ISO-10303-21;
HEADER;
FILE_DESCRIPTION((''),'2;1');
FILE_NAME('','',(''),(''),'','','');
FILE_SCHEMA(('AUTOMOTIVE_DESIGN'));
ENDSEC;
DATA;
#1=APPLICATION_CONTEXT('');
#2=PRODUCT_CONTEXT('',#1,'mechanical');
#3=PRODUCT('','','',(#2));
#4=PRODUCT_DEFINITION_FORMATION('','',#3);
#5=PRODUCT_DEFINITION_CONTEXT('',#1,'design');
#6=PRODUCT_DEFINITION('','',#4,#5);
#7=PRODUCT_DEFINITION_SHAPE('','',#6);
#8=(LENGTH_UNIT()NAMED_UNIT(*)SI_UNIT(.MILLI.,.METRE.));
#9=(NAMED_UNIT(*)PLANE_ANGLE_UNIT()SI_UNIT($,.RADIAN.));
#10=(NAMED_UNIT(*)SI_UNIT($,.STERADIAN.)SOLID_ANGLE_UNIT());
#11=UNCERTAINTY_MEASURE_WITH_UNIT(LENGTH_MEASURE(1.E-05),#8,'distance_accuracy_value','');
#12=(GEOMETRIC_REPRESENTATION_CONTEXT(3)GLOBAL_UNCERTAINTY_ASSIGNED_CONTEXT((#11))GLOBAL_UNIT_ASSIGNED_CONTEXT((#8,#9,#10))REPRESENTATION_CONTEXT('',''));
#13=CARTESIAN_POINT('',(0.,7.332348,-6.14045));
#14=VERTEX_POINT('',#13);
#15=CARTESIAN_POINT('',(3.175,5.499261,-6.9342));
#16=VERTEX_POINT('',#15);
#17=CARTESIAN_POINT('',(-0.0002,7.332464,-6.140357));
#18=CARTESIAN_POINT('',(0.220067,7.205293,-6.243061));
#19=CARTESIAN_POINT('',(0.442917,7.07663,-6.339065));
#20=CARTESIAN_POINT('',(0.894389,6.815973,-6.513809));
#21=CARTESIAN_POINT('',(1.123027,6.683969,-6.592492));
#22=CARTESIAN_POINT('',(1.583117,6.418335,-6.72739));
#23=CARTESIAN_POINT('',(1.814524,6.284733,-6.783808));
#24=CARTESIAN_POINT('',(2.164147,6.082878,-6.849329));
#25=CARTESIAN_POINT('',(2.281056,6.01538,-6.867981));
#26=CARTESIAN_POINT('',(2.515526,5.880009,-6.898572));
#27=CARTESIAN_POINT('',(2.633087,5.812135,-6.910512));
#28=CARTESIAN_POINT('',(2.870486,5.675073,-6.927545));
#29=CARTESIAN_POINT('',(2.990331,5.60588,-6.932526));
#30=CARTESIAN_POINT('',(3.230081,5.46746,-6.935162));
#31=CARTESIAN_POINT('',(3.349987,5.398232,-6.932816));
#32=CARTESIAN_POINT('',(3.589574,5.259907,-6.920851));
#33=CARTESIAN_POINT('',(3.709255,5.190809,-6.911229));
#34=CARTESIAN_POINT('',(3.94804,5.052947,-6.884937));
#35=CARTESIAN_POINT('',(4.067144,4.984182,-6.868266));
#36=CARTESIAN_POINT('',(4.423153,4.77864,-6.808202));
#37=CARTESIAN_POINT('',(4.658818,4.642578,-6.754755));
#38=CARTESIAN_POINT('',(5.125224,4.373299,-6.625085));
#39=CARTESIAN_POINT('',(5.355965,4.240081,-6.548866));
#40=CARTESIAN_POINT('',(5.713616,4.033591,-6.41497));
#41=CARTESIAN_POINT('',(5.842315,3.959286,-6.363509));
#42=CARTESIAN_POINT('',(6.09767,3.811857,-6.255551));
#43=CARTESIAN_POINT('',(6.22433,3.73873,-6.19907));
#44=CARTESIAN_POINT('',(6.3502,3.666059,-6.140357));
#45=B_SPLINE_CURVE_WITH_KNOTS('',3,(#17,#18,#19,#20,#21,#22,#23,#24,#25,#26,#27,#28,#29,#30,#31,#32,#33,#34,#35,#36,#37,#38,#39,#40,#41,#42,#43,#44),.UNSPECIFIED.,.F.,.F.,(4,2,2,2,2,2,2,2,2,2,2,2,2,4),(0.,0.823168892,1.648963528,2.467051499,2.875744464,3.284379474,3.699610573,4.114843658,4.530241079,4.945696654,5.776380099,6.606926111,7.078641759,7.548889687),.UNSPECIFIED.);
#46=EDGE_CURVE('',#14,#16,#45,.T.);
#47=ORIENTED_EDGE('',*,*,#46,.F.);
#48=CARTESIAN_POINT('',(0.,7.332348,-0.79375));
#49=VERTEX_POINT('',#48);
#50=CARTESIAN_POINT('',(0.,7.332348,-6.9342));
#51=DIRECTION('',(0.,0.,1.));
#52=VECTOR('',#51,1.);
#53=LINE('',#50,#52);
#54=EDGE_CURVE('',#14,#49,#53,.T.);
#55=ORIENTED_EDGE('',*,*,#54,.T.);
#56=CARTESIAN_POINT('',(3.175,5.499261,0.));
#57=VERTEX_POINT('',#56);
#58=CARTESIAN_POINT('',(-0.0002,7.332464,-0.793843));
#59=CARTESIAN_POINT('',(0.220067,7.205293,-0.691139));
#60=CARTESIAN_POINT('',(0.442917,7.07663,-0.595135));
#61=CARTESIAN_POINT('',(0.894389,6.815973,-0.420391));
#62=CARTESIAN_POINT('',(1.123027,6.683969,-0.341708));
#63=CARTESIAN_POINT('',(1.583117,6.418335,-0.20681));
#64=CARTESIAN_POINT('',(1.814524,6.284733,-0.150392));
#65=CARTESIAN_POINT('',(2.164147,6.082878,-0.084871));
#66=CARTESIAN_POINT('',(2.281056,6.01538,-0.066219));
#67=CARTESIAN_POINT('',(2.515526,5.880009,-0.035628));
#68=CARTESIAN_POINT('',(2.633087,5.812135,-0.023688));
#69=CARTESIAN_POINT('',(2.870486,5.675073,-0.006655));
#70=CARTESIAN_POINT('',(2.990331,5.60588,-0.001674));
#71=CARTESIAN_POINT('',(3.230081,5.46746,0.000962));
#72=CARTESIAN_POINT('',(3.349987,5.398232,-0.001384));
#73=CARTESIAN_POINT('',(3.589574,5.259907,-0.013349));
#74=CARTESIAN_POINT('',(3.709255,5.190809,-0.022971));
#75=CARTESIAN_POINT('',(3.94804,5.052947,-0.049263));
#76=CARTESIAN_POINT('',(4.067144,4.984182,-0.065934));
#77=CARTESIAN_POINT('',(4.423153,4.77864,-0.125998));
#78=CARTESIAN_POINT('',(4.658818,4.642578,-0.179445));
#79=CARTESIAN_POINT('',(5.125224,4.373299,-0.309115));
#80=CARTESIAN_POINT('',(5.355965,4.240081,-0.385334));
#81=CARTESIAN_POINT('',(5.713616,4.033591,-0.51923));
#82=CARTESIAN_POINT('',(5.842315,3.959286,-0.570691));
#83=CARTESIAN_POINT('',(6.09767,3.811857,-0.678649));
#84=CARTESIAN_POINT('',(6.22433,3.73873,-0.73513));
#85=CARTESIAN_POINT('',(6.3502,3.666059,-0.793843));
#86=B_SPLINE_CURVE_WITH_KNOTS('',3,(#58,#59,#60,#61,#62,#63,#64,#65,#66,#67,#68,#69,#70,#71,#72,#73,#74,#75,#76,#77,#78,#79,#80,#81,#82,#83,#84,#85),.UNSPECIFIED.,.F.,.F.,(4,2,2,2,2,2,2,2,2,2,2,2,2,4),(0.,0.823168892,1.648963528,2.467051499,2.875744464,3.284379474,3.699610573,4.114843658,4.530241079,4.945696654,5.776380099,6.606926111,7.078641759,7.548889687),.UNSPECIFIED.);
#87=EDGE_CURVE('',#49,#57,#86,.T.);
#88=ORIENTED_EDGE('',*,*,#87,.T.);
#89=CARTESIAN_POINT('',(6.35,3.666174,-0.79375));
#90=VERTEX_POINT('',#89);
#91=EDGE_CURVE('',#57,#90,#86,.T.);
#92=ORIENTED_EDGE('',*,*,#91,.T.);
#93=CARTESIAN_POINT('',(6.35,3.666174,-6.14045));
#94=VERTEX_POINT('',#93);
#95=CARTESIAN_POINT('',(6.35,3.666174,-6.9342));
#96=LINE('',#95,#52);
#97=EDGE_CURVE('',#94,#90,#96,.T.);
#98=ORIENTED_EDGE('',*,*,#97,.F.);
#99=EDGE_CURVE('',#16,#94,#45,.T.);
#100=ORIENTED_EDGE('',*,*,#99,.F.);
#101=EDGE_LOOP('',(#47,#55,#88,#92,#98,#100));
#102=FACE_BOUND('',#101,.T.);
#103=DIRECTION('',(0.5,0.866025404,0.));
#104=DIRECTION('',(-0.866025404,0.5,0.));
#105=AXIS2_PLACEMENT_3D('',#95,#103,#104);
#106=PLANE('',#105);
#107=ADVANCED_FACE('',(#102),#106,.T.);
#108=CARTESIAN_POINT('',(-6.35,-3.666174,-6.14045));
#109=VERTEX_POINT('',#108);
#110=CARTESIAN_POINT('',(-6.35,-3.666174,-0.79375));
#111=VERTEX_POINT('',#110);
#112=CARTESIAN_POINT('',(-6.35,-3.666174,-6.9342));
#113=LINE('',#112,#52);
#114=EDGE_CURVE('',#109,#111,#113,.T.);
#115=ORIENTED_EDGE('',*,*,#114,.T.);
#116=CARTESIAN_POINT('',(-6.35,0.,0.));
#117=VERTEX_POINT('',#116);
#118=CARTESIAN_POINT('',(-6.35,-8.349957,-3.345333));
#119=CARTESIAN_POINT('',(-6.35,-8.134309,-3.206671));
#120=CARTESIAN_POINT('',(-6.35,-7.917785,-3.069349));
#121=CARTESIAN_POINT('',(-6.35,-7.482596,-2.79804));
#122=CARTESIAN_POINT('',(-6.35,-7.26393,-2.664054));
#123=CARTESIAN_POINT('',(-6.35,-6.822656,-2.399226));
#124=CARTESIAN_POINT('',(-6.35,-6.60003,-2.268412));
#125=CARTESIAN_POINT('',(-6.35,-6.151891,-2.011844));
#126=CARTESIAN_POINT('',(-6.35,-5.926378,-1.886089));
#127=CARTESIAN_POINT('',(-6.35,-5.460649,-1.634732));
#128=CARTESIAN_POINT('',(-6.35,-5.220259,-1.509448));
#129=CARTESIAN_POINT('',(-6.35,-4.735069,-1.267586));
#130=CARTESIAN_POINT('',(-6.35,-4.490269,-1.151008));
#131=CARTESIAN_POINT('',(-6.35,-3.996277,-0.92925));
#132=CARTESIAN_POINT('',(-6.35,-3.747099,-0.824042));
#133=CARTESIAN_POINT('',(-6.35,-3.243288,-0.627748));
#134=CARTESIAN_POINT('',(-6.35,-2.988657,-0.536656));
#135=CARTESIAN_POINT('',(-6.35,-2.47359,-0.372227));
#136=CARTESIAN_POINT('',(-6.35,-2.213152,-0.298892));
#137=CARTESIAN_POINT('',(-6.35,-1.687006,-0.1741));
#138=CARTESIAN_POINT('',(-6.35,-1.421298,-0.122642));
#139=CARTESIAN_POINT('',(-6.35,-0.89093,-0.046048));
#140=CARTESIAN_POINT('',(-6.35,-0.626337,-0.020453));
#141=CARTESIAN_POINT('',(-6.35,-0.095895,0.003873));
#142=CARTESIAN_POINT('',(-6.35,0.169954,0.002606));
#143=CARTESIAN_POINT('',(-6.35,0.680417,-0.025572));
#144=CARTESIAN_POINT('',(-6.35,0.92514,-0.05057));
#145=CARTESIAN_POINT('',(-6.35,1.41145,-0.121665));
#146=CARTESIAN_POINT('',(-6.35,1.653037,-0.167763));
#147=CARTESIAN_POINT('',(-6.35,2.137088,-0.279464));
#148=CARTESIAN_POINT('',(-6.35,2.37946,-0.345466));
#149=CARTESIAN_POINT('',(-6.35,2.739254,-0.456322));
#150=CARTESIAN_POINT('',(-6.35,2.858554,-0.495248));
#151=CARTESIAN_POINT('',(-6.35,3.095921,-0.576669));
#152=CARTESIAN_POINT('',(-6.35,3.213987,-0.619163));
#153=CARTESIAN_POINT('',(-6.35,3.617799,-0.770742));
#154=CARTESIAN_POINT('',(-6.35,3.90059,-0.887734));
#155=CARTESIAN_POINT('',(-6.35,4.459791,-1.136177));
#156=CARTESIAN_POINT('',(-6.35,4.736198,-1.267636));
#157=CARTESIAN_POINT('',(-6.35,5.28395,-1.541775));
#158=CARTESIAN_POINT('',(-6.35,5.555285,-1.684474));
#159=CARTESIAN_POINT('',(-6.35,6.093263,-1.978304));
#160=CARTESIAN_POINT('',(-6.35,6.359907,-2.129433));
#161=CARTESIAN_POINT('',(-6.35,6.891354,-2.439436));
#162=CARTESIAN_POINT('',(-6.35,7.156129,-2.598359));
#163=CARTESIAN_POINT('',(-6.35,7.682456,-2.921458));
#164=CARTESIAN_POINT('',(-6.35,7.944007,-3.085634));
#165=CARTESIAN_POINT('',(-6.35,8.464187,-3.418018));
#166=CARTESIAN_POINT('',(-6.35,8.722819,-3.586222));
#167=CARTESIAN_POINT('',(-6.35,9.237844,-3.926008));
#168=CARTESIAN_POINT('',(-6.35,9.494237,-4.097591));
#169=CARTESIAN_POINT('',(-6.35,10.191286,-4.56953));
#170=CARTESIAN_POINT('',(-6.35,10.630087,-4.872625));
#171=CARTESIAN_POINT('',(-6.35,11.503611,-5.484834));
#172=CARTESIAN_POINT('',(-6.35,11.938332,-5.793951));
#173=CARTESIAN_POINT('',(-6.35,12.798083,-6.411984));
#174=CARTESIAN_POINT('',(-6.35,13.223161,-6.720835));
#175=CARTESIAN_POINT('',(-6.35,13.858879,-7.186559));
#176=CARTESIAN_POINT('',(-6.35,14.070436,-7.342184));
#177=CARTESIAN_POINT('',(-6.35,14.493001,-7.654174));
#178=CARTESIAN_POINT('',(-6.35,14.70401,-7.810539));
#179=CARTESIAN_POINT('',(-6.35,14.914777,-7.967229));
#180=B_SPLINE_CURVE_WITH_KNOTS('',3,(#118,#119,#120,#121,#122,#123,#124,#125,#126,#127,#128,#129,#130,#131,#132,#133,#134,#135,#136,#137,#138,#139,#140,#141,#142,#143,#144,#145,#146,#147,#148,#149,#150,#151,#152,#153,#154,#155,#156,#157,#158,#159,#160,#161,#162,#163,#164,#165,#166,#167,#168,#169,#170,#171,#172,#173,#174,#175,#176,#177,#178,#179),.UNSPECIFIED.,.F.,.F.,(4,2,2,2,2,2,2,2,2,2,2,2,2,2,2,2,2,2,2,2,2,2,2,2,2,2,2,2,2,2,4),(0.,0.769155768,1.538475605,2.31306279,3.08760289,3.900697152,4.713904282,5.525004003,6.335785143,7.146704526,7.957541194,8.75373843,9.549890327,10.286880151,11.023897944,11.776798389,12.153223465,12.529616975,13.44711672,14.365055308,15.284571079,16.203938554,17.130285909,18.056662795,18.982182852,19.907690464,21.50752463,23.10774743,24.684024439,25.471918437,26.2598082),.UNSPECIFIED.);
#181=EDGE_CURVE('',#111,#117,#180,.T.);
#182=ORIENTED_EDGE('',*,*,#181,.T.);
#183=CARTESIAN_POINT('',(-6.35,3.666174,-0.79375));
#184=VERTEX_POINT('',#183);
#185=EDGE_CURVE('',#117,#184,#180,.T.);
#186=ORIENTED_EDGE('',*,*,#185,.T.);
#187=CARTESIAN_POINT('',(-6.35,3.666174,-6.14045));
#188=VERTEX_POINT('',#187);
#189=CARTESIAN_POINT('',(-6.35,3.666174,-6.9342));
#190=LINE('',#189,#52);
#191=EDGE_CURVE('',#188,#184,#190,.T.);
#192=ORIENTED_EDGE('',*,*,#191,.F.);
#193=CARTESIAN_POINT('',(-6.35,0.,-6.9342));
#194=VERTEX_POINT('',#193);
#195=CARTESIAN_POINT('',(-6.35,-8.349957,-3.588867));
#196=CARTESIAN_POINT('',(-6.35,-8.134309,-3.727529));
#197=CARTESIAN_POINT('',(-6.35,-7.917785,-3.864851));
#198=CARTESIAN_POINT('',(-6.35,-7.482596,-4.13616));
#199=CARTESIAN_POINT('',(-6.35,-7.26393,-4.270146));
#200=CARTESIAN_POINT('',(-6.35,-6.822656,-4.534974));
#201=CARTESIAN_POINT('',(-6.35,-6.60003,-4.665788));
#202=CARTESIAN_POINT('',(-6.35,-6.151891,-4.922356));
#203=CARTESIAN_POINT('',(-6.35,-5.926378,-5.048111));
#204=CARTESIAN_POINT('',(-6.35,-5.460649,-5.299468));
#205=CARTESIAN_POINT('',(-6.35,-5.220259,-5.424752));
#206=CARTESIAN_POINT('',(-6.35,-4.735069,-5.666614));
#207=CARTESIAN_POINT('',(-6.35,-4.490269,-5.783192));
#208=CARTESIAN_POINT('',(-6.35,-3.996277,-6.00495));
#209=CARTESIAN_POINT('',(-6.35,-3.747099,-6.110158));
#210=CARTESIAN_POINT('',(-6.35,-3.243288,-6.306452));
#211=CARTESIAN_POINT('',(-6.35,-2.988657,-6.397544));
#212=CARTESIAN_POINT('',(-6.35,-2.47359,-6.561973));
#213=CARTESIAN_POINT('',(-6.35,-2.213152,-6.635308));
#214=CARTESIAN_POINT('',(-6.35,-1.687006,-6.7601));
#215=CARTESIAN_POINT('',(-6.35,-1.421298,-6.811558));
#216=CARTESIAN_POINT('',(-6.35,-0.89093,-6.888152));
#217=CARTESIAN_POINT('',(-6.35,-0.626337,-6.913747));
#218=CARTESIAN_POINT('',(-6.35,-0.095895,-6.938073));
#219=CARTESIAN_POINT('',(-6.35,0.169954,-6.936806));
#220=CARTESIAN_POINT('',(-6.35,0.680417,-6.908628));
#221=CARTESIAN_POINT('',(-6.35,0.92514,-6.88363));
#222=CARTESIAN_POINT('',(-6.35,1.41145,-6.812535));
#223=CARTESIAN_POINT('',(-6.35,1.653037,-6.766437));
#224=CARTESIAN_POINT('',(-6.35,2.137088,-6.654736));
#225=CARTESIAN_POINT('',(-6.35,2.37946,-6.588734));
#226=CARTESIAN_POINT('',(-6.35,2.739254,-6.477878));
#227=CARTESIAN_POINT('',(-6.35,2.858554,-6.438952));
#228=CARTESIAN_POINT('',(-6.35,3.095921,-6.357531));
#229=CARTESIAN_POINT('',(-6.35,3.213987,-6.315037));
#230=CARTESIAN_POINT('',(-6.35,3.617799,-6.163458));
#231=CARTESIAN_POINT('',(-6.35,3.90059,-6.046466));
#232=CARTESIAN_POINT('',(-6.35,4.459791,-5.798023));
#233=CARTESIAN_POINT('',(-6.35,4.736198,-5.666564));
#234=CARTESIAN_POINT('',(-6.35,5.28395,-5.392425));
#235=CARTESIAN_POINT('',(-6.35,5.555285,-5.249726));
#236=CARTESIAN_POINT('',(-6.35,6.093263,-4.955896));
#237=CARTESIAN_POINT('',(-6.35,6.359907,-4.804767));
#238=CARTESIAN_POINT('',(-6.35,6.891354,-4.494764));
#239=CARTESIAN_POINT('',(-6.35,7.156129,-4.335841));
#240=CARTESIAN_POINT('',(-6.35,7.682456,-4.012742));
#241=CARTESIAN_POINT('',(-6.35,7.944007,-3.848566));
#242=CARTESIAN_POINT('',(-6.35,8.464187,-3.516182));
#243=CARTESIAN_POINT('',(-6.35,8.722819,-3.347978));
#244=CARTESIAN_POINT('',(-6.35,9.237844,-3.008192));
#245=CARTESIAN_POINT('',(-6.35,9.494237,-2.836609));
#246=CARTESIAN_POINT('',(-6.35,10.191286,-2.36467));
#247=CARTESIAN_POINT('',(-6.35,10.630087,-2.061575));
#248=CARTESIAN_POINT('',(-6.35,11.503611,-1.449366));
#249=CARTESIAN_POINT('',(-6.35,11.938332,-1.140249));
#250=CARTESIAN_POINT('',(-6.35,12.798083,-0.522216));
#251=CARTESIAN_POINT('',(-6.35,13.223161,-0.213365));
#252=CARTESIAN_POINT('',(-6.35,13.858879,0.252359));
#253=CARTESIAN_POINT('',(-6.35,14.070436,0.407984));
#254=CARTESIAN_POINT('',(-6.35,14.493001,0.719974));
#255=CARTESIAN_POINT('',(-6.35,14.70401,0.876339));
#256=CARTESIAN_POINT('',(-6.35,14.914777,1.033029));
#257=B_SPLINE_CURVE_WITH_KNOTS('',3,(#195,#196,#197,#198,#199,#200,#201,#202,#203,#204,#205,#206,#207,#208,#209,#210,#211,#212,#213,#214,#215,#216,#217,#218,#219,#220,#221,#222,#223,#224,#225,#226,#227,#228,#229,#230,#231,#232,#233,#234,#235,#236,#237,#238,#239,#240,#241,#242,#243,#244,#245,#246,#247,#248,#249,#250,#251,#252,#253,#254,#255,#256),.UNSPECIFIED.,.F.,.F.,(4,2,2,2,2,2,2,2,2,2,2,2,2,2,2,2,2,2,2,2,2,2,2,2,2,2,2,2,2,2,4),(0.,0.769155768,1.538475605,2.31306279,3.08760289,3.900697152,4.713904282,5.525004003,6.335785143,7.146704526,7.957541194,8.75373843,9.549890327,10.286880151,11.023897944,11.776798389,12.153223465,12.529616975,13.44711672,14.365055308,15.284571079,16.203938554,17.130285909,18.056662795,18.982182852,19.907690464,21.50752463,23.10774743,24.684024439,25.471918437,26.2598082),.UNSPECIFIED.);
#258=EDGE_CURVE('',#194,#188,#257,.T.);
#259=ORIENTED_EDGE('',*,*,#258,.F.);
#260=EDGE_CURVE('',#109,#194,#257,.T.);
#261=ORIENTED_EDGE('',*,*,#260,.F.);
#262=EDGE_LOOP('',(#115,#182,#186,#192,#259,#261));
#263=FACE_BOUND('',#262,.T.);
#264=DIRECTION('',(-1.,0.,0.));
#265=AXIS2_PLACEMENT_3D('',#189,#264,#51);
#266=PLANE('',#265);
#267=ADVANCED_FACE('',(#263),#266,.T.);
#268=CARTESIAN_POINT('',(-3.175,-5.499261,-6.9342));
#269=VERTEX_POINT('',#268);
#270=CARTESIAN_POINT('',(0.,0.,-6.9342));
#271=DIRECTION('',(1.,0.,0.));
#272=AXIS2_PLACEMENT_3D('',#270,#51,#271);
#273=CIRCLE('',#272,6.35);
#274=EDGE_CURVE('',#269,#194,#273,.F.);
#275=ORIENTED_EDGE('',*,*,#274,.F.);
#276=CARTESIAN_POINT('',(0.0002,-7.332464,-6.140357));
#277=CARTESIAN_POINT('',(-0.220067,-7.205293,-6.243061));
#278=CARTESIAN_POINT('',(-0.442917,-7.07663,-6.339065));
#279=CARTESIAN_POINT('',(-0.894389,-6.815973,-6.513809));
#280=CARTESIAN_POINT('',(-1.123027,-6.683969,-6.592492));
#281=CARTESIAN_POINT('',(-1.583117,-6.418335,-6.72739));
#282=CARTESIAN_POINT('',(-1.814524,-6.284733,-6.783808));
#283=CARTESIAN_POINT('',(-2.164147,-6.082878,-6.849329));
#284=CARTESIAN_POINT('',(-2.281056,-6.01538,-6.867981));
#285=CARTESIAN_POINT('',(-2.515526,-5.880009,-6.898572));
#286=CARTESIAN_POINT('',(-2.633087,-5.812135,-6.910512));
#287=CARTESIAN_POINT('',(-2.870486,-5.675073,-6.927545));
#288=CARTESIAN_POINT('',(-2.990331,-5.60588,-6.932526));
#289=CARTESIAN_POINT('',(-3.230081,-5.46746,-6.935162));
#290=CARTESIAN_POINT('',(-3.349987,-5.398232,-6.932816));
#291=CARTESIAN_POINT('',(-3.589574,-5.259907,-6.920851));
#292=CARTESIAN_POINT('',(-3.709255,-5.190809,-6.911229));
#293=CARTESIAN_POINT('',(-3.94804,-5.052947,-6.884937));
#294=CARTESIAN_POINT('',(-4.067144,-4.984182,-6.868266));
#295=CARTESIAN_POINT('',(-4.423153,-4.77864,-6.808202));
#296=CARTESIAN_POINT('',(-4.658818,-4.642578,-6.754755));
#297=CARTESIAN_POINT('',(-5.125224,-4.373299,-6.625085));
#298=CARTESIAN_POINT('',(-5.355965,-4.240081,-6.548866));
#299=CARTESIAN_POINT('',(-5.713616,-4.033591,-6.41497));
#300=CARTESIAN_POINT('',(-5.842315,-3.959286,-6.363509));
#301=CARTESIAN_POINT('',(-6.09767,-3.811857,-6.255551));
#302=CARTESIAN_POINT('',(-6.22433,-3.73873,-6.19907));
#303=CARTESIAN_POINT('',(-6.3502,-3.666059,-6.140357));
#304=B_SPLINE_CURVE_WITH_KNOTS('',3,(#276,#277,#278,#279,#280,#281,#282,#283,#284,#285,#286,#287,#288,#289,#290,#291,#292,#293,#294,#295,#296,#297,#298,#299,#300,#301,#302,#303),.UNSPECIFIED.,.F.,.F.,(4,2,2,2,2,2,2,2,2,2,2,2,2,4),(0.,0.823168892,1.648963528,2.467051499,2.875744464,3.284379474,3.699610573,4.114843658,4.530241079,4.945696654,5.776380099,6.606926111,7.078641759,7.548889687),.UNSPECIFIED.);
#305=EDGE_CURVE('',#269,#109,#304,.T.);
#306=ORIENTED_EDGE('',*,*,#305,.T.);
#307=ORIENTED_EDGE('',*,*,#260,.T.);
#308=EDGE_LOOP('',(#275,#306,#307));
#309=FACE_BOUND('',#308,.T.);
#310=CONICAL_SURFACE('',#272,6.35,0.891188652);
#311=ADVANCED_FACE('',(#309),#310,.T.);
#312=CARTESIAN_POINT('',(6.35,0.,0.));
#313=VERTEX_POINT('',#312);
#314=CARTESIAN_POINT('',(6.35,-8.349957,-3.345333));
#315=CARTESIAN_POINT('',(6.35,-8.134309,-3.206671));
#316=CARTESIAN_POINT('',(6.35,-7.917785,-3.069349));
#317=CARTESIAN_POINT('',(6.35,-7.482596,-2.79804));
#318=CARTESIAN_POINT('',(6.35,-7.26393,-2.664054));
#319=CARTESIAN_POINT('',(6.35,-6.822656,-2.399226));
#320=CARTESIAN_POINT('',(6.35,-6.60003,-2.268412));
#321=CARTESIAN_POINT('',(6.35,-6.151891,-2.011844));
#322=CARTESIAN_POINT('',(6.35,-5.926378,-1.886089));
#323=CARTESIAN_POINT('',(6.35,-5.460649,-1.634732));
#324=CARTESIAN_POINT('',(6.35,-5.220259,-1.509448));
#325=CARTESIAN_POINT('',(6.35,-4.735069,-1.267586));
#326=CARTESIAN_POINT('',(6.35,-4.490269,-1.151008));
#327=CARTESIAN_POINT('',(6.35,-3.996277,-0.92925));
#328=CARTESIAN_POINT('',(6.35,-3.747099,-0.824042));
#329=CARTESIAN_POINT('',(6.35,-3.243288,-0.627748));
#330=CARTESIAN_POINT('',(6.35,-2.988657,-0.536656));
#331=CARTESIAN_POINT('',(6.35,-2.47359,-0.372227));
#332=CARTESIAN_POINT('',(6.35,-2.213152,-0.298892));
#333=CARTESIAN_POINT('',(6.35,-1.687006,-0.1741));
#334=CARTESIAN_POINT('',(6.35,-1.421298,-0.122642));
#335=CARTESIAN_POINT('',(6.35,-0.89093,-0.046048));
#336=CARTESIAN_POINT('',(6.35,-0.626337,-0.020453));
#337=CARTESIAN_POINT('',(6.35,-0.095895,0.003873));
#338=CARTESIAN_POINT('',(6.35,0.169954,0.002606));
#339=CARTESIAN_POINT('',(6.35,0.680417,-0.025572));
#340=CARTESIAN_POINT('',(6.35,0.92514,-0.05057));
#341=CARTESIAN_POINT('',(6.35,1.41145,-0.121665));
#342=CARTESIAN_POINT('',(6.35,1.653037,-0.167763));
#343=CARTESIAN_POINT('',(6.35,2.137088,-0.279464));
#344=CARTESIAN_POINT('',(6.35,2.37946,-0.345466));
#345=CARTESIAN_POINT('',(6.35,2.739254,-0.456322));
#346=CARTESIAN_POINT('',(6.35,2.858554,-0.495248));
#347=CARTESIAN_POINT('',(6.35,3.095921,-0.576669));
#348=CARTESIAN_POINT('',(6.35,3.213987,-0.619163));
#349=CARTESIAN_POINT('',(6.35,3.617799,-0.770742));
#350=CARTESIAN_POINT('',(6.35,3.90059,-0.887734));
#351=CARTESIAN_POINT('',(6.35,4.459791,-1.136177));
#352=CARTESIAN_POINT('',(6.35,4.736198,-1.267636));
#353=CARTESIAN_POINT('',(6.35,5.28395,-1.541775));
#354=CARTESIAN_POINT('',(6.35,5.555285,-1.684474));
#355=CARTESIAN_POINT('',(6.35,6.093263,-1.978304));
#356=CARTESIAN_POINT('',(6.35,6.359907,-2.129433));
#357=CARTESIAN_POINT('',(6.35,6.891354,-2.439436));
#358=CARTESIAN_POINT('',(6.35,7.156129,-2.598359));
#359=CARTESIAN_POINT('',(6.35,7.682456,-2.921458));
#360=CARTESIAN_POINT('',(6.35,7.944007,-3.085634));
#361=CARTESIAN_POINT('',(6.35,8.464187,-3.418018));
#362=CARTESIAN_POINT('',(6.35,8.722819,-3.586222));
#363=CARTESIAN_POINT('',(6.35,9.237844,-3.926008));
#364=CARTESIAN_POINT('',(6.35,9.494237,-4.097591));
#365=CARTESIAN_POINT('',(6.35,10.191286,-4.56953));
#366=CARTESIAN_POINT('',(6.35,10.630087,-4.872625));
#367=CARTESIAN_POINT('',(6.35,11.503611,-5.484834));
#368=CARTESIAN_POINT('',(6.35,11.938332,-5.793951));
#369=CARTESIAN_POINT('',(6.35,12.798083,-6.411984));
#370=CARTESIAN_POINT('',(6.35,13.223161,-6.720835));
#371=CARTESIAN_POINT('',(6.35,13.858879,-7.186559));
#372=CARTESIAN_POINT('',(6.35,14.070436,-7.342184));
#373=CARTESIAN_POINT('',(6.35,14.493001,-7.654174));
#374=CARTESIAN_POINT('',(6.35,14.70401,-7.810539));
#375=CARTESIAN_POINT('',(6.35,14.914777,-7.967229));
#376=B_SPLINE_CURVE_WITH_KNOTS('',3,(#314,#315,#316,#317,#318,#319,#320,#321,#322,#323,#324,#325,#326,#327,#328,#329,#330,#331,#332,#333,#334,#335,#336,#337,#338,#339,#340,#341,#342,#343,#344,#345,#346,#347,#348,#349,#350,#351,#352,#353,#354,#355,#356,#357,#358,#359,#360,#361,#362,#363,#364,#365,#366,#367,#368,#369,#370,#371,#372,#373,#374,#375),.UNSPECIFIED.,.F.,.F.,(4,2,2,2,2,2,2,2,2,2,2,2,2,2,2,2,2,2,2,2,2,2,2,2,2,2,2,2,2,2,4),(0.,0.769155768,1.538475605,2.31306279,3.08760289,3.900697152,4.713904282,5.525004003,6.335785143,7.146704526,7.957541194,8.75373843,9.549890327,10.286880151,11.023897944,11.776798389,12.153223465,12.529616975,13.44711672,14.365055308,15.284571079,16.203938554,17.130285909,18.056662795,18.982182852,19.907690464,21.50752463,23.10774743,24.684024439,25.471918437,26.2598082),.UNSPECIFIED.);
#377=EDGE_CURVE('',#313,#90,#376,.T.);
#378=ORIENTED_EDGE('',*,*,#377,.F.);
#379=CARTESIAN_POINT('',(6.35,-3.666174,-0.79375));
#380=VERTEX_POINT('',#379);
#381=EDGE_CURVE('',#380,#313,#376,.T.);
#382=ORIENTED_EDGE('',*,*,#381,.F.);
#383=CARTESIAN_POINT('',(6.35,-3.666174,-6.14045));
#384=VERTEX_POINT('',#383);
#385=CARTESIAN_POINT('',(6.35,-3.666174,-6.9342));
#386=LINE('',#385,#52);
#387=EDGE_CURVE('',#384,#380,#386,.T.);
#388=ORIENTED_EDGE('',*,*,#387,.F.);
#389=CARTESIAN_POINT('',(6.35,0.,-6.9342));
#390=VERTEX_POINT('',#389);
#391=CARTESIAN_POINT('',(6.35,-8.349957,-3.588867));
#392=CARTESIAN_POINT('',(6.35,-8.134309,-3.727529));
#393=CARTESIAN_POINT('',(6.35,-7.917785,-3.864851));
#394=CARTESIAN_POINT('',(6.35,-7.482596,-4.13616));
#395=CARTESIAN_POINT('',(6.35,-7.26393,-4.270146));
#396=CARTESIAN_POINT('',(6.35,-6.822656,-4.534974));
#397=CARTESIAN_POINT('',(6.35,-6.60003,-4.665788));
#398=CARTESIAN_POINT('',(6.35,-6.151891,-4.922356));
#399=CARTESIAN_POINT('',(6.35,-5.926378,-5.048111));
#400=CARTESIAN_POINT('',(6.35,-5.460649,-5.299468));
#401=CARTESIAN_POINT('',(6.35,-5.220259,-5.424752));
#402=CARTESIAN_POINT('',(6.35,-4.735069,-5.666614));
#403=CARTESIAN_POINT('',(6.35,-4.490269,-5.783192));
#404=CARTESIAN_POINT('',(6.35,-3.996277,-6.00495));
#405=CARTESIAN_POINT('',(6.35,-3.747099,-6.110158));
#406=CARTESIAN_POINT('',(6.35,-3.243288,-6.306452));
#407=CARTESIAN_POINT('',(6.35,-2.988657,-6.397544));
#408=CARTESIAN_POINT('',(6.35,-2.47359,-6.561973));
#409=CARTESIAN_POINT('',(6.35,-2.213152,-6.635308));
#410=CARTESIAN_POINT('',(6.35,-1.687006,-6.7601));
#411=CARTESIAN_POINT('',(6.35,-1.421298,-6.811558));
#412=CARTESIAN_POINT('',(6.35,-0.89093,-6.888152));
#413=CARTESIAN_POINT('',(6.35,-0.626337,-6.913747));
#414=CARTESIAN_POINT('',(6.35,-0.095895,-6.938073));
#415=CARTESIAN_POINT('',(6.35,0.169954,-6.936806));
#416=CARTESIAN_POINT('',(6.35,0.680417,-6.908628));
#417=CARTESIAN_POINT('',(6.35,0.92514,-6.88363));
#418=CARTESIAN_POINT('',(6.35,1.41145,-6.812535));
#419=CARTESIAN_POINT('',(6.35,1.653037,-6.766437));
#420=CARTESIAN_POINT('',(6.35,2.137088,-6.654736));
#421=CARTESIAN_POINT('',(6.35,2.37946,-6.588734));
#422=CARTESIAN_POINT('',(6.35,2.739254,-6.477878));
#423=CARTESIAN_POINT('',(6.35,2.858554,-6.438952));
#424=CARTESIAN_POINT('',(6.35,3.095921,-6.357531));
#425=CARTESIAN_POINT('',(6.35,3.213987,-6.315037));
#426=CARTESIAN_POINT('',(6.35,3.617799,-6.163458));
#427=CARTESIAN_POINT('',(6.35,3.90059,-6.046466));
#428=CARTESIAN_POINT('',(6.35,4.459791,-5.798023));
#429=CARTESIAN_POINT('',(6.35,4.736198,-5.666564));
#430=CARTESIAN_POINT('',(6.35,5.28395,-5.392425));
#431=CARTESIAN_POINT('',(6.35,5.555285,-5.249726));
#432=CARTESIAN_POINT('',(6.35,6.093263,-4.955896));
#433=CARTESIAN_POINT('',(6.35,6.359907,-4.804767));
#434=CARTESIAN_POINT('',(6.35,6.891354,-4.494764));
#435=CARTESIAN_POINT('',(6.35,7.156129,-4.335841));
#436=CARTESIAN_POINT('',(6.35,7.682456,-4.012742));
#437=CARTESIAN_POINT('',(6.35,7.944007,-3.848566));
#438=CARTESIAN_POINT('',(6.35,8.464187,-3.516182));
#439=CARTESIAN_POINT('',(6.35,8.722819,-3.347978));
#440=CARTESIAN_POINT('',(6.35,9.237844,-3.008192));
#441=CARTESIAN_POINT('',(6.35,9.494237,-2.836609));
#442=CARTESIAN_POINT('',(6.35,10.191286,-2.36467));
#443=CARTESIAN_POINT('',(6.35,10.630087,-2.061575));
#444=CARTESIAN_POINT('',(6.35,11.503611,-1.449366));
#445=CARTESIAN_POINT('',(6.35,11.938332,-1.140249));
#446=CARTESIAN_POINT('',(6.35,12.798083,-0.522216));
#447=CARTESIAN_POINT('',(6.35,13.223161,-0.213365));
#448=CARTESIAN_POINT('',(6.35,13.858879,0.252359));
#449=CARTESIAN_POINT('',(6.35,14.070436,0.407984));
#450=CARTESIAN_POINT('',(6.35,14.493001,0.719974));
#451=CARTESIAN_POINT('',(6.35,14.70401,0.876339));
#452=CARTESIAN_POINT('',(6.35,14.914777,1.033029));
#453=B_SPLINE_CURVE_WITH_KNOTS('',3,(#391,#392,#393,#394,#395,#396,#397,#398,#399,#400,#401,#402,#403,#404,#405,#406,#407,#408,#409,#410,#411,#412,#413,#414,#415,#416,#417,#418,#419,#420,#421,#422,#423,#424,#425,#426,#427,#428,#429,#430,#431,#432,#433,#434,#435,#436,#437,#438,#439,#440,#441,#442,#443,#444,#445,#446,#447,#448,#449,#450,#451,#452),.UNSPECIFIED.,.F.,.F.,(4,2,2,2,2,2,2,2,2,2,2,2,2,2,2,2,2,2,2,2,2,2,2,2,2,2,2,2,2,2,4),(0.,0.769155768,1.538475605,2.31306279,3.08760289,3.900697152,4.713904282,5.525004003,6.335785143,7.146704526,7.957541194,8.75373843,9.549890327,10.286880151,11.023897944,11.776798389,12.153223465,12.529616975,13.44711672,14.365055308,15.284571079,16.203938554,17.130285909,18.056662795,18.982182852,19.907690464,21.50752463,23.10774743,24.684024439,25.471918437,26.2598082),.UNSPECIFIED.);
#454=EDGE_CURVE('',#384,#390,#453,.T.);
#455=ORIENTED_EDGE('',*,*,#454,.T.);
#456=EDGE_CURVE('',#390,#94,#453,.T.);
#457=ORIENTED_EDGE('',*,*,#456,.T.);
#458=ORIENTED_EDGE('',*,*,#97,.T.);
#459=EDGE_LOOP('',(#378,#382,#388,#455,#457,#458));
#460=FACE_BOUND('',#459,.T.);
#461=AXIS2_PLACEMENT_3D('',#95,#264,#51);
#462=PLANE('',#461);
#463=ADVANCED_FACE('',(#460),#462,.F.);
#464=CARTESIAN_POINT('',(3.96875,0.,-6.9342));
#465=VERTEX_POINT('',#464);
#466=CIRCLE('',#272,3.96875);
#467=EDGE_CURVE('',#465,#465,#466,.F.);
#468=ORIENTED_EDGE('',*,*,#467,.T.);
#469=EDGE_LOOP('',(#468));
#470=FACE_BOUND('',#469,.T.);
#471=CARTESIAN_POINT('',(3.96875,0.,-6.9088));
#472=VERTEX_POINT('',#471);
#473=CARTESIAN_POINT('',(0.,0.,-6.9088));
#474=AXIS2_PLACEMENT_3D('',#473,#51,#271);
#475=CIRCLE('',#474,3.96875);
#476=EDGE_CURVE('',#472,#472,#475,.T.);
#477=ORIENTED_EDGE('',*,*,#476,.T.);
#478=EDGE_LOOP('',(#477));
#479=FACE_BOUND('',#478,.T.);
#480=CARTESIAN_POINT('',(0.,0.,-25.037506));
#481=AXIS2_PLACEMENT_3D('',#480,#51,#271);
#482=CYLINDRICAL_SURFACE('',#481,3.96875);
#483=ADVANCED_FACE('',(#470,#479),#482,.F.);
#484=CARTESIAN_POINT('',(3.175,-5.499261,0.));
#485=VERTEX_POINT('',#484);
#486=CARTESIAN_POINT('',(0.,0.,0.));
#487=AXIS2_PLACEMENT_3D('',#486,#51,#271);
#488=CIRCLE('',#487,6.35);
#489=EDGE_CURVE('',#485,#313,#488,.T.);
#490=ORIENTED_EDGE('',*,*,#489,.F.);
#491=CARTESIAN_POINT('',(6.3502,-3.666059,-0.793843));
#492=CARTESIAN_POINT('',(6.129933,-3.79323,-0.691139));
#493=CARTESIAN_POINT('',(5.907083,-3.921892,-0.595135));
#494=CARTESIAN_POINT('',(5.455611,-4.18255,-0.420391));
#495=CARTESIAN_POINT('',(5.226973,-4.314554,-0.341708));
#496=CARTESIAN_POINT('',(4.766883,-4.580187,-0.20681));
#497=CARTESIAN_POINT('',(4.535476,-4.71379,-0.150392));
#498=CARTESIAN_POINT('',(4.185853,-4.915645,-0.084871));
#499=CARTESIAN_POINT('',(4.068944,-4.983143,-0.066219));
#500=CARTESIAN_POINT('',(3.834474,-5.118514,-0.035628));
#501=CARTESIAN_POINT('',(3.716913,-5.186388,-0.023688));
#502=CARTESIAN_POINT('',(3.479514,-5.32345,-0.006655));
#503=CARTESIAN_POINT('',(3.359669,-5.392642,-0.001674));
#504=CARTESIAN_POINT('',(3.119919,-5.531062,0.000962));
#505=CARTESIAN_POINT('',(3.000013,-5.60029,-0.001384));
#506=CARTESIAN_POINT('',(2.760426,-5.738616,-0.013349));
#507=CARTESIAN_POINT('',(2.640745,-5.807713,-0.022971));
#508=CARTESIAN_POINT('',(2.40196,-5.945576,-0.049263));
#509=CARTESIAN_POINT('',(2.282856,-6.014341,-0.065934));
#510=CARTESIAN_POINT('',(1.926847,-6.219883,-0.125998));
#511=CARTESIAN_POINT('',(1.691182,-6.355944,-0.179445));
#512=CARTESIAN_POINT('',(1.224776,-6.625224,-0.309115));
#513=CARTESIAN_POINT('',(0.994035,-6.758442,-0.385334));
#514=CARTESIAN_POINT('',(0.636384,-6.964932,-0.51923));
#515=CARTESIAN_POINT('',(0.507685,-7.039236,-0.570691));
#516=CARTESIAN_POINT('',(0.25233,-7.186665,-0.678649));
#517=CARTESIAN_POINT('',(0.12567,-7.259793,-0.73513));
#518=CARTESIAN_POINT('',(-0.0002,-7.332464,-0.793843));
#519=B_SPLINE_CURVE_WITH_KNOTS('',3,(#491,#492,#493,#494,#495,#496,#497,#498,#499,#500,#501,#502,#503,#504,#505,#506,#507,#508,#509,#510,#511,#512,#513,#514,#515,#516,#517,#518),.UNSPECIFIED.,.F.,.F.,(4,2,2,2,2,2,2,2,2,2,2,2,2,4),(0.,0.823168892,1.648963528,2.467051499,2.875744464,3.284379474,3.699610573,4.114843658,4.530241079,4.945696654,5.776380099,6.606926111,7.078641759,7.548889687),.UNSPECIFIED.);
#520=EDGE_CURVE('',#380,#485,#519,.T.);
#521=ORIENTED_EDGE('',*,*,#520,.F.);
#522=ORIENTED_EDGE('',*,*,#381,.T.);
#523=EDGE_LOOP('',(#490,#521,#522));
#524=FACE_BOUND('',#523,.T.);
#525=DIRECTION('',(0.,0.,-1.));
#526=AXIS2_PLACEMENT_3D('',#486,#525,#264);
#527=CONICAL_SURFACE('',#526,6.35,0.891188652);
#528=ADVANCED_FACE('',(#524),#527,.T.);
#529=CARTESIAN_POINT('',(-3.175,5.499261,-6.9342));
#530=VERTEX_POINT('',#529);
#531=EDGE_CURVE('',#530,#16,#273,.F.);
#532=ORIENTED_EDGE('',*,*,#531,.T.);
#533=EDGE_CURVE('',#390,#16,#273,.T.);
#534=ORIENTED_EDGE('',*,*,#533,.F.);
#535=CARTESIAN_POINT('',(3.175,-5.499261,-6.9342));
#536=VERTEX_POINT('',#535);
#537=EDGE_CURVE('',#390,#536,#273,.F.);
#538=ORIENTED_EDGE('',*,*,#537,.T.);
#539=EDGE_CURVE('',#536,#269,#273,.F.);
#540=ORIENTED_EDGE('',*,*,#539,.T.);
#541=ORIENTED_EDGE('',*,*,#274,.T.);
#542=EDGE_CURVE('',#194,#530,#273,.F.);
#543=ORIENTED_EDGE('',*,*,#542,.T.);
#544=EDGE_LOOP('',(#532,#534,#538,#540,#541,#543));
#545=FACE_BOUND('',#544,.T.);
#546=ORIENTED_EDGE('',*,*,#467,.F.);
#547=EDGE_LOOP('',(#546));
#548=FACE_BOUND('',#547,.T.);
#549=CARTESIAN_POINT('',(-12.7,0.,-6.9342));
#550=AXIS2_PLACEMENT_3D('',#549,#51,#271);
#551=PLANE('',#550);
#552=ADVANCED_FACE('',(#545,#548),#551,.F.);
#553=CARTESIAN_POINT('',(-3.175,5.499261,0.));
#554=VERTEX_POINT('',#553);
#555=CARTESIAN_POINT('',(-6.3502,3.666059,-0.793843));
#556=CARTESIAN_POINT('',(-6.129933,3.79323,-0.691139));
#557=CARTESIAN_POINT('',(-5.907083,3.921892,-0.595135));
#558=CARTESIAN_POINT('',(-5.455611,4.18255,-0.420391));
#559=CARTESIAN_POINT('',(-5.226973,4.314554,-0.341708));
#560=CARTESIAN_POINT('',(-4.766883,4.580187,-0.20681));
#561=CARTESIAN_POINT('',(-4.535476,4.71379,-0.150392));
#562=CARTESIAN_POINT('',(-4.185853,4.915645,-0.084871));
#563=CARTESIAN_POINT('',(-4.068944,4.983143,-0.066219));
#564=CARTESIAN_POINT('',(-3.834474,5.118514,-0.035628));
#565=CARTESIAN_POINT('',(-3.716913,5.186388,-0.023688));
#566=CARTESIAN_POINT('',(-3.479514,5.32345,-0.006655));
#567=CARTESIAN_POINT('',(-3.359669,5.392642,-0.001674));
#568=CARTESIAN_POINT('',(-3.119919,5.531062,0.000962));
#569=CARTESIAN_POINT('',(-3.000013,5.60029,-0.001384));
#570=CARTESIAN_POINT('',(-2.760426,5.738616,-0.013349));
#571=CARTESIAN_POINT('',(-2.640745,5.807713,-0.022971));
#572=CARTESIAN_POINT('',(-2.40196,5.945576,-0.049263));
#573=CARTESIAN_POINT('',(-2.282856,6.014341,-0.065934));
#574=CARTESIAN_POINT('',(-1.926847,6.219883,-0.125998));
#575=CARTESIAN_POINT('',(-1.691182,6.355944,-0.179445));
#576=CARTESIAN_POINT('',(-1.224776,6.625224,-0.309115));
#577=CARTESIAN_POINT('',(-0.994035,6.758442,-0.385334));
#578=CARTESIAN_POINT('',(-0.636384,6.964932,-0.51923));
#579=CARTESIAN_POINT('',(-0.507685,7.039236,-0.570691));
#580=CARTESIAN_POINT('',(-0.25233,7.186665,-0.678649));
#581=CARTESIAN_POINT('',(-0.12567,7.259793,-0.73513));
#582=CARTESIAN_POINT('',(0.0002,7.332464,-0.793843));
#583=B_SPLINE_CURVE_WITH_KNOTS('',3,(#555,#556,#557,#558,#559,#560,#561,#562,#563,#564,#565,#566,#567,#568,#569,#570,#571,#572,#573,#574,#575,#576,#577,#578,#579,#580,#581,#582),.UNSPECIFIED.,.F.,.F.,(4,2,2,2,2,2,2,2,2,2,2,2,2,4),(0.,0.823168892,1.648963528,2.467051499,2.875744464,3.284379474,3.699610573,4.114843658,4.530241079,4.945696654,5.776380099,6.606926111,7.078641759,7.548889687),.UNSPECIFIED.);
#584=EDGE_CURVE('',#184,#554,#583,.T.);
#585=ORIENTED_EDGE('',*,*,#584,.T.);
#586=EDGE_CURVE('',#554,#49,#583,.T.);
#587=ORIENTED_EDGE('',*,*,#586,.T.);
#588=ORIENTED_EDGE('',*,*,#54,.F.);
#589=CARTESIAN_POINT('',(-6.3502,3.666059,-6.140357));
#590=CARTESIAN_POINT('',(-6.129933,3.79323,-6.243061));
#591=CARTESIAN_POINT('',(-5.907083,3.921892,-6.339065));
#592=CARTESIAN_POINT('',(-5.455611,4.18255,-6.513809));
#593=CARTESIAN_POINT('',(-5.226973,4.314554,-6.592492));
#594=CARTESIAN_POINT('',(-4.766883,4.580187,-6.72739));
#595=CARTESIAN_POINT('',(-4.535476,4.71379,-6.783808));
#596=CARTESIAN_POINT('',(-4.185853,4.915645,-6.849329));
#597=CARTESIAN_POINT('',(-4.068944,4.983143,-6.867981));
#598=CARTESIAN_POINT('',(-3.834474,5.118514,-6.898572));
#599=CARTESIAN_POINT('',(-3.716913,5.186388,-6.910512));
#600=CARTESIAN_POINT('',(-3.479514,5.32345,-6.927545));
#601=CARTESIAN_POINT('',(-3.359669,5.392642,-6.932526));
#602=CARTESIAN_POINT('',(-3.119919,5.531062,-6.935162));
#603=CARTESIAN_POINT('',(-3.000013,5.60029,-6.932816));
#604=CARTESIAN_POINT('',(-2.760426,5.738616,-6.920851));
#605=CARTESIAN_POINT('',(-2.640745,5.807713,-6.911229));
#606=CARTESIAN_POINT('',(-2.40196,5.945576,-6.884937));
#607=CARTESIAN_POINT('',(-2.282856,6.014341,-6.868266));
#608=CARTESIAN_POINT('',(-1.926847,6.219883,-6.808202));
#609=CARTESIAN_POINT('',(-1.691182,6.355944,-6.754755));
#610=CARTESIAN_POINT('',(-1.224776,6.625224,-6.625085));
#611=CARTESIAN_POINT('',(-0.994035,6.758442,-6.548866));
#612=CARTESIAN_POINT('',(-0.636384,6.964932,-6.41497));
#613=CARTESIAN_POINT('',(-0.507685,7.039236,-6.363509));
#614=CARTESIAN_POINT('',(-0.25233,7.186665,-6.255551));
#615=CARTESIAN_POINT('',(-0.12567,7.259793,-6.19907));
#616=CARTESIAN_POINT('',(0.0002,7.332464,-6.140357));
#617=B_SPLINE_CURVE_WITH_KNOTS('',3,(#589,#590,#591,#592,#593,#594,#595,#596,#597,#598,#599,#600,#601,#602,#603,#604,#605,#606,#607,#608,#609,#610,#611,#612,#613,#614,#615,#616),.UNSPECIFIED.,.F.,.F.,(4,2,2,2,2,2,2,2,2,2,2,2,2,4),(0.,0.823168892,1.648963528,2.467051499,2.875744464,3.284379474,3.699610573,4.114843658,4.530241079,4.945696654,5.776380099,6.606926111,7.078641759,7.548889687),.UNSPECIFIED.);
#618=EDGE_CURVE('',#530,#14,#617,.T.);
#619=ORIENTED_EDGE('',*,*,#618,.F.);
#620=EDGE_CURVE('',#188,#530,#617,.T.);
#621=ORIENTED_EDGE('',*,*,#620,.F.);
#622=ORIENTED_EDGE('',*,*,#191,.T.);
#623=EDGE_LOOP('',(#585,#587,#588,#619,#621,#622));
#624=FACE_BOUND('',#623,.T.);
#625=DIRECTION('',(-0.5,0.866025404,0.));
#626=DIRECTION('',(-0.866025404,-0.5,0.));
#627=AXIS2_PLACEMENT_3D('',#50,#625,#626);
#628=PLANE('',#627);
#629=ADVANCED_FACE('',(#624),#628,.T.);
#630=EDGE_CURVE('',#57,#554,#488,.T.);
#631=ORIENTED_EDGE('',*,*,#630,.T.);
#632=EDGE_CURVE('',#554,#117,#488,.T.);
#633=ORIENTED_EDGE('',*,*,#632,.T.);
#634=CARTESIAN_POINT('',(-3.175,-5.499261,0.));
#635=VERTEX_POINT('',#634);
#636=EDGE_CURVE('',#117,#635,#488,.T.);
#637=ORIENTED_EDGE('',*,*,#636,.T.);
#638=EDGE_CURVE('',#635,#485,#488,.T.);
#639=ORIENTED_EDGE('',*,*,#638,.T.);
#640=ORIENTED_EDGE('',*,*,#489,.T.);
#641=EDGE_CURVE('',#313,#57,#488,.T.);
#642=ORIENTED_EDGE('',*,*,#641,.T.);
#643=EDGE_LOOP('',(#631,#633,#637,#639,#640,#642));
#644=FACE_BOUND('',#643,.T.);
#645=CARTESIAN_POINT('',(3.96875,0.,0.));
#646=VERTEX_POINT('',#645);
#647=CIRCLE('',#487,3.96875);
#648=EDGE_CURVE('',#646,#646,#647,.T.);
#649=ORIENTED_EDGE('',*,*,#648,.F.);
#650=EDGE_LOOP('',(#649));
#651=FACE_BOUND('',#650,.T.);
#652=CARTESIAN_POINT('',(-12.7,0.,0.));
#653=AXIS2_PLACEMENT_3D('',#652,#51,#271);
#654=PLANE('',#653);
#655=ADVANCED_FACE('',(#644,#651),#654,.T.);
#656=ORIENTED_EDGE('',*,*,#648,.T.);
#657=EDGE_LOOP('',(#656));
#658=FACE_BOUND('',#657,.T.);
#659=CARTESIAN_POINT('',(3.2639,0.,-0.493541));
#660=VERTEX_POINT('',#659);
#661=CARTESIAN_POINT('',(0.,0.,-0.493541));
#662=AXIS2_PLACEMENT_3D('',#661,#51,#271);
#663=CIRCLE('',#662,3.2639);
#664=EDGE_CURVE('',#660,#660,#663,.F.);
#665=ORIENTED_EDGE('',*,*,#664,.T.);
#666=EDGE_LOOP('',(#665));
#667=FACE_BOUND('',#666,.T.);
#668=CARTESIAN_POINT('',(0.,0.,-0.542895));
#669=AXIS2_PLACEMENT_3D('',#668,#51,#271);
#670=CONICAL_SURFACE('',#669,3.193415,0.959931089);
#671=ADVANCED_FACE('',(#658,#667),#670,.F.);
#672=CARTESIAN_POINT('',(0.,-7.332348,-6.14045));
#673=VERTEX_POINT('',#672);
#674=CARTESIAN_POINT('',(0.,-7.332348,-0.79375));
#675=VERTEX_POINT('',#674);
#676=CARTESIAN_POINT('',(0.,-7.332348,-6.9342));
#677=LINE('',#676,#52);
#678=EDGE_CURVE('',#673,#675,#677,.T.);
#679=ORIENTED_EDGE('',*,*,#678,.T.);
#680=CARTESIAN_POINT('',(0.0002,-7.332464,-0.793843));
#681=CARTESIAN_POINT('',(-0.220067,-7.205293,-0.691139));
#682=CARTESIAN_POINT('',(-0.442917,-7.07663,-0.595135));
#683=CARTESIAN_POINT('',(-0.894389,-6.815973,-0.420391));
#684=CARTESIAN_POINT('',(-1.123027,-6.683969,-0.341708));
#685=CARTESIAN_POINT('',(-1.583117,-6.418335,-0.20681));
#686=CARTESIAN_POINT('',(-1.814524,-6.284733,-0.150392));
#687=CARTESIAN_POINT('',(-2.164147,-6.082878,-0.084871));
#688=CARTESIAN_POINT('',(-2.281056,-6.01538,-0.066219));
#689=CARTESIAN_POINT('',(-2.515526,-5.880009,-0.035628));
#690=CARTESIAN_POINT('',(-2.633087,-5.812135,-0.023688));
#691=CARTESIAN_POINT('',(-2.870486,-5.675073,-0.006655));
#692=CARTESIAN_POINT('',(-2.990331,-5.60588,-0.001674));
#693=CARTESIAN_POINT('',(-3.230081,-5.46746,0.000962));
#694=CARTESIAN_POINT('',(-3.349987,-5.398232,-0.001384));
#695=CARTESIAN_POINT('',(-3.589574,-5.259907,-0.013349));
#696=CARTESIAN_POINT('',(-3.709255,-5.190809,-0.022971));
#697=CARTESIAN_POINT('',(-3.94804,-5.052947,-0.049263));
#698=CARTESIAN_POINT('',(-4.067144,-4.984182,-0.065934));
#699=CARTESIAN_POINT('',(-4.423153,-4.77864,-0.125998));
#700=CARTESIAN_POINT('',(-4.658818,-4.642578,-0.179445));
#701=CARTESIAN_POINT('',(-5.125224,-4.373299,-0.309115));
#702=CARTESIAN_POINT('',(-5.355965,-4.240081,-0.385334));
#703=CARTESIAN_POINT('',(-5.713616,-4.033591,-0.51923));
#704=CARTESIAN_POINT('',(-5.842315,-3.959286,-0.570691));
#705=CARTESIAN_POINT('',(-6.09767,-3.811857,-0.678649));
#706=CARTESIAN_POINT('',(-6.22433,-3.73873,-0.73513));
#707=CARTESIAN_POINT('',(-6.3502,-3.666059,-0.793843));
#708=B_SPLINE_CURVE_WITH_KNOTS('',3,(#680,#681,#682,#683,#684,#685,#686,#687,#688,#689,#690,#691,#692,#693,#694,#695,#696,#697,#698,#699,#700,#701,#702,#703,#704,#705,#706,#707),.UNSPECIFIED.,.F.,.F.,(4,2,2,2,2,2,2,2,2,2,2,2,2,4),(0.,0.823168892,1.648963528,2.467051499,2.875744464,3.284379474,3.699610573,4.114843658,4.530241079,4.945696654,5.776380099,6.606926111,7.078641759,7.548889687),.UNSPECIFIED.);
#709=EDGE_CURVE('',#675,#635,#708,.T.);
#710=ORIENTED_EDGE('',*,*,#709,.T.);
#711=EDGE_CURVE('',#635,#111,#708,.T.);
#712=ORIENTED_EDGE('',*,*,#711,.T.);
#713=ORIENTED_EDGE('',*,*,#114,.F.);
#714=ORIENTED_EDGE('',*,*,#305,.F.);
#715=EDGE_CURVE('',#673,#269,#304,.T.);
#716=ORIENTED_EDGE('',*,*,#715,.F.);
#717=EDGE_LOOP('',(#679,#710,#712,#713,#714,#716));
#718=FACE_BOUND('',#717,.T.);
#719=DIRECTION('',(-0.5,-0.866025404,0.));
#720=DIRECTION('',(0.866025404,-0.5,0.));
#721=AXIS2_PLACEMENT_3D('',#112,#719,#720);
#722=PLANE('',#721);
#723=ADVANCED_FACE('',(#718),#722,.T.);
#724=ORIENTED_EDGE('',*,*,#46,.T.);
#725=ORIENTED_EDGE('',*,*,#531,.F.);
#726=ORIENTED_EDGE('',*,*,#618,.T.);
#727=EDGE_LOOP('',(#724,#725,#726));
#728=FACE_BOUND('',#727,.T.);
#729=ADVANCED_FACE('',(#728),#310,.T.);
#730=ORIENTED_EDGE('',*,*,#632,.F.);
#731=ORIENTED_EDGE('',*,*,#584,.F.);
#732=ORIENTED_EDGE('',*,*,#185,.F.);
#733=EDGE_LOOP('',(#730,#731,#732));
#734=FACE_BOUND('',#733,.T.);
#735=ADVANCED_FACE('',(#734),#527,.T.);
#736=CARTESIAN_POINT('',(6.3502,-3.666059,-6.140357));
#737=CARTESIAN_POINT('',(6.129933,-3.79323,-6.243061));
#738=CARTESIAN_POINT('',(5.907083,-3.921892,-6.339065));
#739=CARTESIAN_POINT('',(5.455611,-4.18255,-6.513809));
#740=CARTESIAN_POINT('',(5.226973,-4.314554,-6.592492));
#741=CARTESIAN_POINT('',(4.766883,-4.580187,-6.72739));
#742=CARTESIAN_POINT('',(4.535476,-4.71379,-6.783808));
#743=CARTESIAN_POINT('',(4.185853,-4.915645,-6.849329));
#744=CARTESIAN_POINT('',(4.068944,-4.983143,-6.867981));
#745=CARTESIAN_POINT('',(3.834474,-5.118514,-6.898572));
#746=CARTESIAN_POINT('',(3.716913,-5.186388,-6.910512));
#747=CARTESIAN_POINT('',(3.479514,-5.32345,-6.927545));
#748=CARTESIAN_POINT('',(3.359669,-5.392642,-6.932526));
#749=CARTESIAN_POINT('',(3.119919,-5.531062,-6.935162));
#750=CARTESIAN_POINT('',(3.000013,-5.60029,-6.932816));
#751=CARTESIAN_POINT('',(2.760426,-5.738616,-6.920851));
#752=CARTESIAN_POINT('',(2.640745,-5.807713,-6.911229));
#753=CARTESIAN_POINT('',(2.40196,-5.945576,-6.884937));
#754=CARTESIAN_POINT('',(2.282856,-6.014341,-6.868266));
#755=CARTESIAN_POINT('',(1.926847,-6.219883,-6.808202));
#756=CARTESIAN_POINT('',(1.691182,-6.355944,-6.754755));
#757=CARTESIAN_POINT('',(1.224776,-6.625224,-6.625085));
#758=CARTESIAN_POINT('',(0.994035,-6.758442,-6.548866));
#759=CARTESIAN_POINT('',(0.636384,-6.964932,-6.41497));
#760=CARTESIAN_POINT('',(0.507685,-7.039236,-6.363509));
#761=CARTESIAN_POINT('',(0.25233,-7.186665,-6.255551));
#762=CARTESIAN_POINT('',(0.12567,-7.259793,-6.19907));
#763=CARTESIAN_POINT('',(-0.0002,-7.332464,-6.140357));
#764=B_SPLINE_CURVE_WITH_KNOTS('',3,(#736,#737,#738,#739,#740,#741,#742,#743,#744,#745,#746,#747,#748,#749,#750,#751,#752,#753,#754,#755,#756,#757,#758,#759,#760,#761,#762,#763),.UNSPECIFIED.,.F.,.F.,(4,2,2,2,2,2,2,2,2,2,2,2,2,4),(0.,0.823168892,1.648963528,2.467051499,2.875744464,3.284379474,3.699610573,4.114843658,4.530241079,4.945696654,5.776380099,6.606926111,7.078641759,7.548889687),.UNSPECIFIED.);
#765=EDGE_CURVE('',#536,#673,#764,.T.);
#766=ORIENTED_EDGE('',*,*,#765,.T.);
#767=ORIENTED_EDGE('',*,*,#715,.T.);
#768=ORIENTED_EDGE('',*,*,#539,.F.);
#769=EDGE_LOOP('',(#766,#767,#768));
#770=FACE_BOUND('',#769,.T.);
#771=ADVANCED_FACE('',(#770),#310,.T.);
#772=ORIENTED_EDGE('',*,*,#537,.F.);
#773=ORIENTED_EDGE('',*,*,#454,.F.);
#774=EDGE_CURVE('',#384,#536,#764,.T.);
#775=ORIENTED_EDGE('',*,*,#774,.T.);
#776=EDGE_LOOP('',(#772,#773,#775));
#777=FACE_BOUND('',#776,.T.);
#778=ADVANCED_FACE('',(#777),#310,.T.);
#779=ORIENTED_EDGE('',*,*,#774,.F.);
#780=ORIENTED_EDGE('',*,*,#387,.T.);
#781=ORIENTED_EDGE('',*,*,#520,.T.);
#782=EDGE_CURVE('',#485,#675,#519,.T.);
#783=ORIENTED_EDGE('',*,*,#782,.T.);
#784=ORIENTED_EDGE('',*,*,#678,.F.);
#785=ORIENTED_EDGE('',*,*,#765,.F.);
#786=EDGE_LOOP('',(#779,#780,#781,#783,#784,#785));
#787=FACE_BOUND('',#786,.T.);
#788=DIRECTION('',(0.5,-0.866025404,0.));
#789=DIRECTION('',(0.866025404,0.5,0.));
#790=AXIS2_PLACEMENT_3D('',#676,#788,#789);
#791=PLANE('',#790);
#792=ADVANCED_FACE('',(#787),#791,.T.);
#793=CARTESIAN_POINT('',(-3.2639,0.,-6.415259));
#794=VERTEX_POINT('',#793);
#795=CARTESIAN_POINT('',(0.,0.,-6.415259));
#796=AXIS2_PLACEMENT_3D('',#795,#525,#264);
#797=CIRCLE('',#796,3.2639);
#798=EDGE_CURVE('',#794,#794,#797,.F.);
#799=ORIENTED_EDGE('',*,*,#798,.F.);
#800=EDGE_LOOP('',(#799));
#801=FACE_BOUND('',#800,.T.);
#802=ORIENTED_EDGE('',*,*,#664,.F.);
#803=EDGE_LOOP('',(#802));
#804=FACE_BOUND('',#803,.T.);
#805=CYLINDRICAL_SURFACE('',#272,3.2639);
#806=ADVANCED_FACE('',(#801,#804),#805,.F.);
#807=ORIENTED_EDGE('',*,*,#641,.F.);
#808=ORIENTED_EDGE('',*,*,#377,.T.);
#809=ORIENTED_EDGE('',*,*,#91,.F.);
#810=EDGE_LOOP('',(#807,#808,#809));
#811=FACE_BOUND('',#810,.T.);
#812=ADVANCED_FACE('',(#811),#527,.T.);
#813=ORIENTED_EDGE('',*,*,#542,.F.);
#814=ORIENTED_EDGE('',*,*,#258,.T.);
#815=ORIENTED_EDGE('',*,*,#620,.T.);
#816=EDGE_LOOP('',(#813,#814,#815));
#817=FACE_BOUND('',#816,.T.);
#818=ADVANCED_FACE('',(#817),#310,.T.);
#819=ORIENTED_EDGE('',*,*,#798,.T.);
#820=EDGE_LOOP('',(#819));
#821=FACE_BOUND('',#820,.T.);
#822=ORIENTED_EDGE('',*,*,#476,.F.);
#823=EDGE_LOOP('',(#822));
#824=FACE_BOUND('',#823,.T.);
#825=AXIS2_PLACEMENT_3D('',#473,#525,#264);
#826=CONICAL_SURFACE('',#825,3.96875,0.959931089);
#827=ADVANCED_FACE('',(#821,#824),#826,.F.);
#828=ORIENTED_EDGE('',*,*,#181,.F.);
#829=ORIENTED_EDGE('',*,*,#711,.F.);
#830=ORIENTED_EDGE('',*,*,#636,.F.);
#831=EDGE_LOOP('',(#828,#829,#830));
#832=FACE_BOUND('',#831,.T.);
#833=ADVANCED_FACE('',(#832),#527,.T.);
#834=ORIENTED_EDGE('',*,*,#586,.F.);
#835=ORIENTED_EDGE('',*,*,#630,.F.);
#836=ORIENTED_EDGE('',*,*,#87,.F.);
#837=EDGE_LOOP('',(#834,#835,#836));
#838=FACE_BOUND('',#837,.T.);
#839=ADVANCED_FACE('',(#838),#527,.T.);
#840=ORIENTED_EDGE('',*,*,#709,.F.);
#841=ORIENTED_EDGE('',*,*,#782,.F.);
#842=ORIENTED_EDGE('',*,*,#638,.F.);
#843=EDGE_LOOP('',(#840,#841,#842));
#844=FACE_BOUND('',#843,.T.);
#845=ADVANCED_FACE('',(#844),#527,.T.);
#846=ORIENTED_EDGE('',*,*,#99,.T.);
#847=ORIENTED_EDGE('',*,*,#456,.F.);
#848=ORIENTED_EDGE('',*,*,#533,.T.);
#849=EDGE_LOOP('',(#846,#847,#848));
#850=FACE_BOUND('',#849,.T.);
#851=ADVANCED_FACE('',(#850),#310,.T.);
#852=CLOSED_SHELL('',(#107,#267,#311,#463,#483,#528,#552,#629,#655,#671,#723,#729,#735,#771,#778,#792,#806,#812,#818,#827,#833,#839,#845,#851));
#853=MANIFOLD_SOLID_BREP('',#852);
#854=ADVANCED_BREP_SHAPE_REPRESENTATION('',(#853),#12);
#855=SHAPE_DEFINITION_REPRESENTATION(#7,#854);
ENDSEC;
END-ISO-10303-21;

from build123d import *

# Parameters (mm, degrees)
BASENUT_START = -6.9342
BASENUTSKE_R  = 3.2639
BASENUT_DEPTH = 6.9342


# Read off the part's stored shape, not the designer's step: ThreadSchematic
with BuildPart() as part:
    # BaseNutSke → BaseNut (new body)
    with BuildSketch(Plane.XY.offset(BASENUT_START)):
        Polygon((6.35, 3.666174209), (6.35, -3.666174209), (0, -7.332348419), (-6.35, -3.666174209), (-6.35, 3.666174209), (0, 7.332348419), align=None)
        Circle(BASENUTSKE_R, mode=Mode.SUBTRACT)
    extrude(amount=BASENUT_DEPTH)

    # Sketch5 (on Front Plane) → EndChamfer (revolve, cut)
    with BuildSketch(Plane.XY):
        Polygon((6.9088, 3.96875), (6.365904588, 3.193415), (6.9596, 3.193415), (6.9596, 3.96875), align=None)
    revolve(axis=Axis((6.9088, 3.96875, 0), (-0.5735764363510457, -0.819152044288992, 0)), mode=Mode.SUBTRACT)

    # Sketch3 → Double-Chamfer (revolve, cut)
    with BuildSketch(Plane(origin=(0, 0, 0), x_dir=(0, 0, -1), z_dir=(1, 0, 0))):
        Polygon((6.9342, 6.35), (6.14045, 7.332348419), (6.14045, 20.032348419), (19.6342, 20.032348419), (19.6342, 6.35), align=None)
        Polygon((0.79375, 20.032348419), (-12.7, 20.032348419), (-12.7, 6.35), (0, 6.35), (0.79375, 7.332348419), align=None)
    revolve(axis=Axis((0, 0, 0), (0, 0, -1)), mode=Mode.SUBTRACT)

    # ThreadSchematic outline → ThreadSchematic (revolve, cut)
    with BuildSketch(Plane.XZ):
        Polygon((3.2639, 0), (3.2639, -0.493541283), (3.96875, 0), align=None)
        Polygon((3.96875, -6.9088), (3.2639, -6.415258717), (3.2639, -6.9342), (3.96875, -6.9342), align=None)
    revolve(axis=Axis((0, 0, 0), (0, 0, 1)), mode=Mode.SUBTRACT)


solid = part.part
